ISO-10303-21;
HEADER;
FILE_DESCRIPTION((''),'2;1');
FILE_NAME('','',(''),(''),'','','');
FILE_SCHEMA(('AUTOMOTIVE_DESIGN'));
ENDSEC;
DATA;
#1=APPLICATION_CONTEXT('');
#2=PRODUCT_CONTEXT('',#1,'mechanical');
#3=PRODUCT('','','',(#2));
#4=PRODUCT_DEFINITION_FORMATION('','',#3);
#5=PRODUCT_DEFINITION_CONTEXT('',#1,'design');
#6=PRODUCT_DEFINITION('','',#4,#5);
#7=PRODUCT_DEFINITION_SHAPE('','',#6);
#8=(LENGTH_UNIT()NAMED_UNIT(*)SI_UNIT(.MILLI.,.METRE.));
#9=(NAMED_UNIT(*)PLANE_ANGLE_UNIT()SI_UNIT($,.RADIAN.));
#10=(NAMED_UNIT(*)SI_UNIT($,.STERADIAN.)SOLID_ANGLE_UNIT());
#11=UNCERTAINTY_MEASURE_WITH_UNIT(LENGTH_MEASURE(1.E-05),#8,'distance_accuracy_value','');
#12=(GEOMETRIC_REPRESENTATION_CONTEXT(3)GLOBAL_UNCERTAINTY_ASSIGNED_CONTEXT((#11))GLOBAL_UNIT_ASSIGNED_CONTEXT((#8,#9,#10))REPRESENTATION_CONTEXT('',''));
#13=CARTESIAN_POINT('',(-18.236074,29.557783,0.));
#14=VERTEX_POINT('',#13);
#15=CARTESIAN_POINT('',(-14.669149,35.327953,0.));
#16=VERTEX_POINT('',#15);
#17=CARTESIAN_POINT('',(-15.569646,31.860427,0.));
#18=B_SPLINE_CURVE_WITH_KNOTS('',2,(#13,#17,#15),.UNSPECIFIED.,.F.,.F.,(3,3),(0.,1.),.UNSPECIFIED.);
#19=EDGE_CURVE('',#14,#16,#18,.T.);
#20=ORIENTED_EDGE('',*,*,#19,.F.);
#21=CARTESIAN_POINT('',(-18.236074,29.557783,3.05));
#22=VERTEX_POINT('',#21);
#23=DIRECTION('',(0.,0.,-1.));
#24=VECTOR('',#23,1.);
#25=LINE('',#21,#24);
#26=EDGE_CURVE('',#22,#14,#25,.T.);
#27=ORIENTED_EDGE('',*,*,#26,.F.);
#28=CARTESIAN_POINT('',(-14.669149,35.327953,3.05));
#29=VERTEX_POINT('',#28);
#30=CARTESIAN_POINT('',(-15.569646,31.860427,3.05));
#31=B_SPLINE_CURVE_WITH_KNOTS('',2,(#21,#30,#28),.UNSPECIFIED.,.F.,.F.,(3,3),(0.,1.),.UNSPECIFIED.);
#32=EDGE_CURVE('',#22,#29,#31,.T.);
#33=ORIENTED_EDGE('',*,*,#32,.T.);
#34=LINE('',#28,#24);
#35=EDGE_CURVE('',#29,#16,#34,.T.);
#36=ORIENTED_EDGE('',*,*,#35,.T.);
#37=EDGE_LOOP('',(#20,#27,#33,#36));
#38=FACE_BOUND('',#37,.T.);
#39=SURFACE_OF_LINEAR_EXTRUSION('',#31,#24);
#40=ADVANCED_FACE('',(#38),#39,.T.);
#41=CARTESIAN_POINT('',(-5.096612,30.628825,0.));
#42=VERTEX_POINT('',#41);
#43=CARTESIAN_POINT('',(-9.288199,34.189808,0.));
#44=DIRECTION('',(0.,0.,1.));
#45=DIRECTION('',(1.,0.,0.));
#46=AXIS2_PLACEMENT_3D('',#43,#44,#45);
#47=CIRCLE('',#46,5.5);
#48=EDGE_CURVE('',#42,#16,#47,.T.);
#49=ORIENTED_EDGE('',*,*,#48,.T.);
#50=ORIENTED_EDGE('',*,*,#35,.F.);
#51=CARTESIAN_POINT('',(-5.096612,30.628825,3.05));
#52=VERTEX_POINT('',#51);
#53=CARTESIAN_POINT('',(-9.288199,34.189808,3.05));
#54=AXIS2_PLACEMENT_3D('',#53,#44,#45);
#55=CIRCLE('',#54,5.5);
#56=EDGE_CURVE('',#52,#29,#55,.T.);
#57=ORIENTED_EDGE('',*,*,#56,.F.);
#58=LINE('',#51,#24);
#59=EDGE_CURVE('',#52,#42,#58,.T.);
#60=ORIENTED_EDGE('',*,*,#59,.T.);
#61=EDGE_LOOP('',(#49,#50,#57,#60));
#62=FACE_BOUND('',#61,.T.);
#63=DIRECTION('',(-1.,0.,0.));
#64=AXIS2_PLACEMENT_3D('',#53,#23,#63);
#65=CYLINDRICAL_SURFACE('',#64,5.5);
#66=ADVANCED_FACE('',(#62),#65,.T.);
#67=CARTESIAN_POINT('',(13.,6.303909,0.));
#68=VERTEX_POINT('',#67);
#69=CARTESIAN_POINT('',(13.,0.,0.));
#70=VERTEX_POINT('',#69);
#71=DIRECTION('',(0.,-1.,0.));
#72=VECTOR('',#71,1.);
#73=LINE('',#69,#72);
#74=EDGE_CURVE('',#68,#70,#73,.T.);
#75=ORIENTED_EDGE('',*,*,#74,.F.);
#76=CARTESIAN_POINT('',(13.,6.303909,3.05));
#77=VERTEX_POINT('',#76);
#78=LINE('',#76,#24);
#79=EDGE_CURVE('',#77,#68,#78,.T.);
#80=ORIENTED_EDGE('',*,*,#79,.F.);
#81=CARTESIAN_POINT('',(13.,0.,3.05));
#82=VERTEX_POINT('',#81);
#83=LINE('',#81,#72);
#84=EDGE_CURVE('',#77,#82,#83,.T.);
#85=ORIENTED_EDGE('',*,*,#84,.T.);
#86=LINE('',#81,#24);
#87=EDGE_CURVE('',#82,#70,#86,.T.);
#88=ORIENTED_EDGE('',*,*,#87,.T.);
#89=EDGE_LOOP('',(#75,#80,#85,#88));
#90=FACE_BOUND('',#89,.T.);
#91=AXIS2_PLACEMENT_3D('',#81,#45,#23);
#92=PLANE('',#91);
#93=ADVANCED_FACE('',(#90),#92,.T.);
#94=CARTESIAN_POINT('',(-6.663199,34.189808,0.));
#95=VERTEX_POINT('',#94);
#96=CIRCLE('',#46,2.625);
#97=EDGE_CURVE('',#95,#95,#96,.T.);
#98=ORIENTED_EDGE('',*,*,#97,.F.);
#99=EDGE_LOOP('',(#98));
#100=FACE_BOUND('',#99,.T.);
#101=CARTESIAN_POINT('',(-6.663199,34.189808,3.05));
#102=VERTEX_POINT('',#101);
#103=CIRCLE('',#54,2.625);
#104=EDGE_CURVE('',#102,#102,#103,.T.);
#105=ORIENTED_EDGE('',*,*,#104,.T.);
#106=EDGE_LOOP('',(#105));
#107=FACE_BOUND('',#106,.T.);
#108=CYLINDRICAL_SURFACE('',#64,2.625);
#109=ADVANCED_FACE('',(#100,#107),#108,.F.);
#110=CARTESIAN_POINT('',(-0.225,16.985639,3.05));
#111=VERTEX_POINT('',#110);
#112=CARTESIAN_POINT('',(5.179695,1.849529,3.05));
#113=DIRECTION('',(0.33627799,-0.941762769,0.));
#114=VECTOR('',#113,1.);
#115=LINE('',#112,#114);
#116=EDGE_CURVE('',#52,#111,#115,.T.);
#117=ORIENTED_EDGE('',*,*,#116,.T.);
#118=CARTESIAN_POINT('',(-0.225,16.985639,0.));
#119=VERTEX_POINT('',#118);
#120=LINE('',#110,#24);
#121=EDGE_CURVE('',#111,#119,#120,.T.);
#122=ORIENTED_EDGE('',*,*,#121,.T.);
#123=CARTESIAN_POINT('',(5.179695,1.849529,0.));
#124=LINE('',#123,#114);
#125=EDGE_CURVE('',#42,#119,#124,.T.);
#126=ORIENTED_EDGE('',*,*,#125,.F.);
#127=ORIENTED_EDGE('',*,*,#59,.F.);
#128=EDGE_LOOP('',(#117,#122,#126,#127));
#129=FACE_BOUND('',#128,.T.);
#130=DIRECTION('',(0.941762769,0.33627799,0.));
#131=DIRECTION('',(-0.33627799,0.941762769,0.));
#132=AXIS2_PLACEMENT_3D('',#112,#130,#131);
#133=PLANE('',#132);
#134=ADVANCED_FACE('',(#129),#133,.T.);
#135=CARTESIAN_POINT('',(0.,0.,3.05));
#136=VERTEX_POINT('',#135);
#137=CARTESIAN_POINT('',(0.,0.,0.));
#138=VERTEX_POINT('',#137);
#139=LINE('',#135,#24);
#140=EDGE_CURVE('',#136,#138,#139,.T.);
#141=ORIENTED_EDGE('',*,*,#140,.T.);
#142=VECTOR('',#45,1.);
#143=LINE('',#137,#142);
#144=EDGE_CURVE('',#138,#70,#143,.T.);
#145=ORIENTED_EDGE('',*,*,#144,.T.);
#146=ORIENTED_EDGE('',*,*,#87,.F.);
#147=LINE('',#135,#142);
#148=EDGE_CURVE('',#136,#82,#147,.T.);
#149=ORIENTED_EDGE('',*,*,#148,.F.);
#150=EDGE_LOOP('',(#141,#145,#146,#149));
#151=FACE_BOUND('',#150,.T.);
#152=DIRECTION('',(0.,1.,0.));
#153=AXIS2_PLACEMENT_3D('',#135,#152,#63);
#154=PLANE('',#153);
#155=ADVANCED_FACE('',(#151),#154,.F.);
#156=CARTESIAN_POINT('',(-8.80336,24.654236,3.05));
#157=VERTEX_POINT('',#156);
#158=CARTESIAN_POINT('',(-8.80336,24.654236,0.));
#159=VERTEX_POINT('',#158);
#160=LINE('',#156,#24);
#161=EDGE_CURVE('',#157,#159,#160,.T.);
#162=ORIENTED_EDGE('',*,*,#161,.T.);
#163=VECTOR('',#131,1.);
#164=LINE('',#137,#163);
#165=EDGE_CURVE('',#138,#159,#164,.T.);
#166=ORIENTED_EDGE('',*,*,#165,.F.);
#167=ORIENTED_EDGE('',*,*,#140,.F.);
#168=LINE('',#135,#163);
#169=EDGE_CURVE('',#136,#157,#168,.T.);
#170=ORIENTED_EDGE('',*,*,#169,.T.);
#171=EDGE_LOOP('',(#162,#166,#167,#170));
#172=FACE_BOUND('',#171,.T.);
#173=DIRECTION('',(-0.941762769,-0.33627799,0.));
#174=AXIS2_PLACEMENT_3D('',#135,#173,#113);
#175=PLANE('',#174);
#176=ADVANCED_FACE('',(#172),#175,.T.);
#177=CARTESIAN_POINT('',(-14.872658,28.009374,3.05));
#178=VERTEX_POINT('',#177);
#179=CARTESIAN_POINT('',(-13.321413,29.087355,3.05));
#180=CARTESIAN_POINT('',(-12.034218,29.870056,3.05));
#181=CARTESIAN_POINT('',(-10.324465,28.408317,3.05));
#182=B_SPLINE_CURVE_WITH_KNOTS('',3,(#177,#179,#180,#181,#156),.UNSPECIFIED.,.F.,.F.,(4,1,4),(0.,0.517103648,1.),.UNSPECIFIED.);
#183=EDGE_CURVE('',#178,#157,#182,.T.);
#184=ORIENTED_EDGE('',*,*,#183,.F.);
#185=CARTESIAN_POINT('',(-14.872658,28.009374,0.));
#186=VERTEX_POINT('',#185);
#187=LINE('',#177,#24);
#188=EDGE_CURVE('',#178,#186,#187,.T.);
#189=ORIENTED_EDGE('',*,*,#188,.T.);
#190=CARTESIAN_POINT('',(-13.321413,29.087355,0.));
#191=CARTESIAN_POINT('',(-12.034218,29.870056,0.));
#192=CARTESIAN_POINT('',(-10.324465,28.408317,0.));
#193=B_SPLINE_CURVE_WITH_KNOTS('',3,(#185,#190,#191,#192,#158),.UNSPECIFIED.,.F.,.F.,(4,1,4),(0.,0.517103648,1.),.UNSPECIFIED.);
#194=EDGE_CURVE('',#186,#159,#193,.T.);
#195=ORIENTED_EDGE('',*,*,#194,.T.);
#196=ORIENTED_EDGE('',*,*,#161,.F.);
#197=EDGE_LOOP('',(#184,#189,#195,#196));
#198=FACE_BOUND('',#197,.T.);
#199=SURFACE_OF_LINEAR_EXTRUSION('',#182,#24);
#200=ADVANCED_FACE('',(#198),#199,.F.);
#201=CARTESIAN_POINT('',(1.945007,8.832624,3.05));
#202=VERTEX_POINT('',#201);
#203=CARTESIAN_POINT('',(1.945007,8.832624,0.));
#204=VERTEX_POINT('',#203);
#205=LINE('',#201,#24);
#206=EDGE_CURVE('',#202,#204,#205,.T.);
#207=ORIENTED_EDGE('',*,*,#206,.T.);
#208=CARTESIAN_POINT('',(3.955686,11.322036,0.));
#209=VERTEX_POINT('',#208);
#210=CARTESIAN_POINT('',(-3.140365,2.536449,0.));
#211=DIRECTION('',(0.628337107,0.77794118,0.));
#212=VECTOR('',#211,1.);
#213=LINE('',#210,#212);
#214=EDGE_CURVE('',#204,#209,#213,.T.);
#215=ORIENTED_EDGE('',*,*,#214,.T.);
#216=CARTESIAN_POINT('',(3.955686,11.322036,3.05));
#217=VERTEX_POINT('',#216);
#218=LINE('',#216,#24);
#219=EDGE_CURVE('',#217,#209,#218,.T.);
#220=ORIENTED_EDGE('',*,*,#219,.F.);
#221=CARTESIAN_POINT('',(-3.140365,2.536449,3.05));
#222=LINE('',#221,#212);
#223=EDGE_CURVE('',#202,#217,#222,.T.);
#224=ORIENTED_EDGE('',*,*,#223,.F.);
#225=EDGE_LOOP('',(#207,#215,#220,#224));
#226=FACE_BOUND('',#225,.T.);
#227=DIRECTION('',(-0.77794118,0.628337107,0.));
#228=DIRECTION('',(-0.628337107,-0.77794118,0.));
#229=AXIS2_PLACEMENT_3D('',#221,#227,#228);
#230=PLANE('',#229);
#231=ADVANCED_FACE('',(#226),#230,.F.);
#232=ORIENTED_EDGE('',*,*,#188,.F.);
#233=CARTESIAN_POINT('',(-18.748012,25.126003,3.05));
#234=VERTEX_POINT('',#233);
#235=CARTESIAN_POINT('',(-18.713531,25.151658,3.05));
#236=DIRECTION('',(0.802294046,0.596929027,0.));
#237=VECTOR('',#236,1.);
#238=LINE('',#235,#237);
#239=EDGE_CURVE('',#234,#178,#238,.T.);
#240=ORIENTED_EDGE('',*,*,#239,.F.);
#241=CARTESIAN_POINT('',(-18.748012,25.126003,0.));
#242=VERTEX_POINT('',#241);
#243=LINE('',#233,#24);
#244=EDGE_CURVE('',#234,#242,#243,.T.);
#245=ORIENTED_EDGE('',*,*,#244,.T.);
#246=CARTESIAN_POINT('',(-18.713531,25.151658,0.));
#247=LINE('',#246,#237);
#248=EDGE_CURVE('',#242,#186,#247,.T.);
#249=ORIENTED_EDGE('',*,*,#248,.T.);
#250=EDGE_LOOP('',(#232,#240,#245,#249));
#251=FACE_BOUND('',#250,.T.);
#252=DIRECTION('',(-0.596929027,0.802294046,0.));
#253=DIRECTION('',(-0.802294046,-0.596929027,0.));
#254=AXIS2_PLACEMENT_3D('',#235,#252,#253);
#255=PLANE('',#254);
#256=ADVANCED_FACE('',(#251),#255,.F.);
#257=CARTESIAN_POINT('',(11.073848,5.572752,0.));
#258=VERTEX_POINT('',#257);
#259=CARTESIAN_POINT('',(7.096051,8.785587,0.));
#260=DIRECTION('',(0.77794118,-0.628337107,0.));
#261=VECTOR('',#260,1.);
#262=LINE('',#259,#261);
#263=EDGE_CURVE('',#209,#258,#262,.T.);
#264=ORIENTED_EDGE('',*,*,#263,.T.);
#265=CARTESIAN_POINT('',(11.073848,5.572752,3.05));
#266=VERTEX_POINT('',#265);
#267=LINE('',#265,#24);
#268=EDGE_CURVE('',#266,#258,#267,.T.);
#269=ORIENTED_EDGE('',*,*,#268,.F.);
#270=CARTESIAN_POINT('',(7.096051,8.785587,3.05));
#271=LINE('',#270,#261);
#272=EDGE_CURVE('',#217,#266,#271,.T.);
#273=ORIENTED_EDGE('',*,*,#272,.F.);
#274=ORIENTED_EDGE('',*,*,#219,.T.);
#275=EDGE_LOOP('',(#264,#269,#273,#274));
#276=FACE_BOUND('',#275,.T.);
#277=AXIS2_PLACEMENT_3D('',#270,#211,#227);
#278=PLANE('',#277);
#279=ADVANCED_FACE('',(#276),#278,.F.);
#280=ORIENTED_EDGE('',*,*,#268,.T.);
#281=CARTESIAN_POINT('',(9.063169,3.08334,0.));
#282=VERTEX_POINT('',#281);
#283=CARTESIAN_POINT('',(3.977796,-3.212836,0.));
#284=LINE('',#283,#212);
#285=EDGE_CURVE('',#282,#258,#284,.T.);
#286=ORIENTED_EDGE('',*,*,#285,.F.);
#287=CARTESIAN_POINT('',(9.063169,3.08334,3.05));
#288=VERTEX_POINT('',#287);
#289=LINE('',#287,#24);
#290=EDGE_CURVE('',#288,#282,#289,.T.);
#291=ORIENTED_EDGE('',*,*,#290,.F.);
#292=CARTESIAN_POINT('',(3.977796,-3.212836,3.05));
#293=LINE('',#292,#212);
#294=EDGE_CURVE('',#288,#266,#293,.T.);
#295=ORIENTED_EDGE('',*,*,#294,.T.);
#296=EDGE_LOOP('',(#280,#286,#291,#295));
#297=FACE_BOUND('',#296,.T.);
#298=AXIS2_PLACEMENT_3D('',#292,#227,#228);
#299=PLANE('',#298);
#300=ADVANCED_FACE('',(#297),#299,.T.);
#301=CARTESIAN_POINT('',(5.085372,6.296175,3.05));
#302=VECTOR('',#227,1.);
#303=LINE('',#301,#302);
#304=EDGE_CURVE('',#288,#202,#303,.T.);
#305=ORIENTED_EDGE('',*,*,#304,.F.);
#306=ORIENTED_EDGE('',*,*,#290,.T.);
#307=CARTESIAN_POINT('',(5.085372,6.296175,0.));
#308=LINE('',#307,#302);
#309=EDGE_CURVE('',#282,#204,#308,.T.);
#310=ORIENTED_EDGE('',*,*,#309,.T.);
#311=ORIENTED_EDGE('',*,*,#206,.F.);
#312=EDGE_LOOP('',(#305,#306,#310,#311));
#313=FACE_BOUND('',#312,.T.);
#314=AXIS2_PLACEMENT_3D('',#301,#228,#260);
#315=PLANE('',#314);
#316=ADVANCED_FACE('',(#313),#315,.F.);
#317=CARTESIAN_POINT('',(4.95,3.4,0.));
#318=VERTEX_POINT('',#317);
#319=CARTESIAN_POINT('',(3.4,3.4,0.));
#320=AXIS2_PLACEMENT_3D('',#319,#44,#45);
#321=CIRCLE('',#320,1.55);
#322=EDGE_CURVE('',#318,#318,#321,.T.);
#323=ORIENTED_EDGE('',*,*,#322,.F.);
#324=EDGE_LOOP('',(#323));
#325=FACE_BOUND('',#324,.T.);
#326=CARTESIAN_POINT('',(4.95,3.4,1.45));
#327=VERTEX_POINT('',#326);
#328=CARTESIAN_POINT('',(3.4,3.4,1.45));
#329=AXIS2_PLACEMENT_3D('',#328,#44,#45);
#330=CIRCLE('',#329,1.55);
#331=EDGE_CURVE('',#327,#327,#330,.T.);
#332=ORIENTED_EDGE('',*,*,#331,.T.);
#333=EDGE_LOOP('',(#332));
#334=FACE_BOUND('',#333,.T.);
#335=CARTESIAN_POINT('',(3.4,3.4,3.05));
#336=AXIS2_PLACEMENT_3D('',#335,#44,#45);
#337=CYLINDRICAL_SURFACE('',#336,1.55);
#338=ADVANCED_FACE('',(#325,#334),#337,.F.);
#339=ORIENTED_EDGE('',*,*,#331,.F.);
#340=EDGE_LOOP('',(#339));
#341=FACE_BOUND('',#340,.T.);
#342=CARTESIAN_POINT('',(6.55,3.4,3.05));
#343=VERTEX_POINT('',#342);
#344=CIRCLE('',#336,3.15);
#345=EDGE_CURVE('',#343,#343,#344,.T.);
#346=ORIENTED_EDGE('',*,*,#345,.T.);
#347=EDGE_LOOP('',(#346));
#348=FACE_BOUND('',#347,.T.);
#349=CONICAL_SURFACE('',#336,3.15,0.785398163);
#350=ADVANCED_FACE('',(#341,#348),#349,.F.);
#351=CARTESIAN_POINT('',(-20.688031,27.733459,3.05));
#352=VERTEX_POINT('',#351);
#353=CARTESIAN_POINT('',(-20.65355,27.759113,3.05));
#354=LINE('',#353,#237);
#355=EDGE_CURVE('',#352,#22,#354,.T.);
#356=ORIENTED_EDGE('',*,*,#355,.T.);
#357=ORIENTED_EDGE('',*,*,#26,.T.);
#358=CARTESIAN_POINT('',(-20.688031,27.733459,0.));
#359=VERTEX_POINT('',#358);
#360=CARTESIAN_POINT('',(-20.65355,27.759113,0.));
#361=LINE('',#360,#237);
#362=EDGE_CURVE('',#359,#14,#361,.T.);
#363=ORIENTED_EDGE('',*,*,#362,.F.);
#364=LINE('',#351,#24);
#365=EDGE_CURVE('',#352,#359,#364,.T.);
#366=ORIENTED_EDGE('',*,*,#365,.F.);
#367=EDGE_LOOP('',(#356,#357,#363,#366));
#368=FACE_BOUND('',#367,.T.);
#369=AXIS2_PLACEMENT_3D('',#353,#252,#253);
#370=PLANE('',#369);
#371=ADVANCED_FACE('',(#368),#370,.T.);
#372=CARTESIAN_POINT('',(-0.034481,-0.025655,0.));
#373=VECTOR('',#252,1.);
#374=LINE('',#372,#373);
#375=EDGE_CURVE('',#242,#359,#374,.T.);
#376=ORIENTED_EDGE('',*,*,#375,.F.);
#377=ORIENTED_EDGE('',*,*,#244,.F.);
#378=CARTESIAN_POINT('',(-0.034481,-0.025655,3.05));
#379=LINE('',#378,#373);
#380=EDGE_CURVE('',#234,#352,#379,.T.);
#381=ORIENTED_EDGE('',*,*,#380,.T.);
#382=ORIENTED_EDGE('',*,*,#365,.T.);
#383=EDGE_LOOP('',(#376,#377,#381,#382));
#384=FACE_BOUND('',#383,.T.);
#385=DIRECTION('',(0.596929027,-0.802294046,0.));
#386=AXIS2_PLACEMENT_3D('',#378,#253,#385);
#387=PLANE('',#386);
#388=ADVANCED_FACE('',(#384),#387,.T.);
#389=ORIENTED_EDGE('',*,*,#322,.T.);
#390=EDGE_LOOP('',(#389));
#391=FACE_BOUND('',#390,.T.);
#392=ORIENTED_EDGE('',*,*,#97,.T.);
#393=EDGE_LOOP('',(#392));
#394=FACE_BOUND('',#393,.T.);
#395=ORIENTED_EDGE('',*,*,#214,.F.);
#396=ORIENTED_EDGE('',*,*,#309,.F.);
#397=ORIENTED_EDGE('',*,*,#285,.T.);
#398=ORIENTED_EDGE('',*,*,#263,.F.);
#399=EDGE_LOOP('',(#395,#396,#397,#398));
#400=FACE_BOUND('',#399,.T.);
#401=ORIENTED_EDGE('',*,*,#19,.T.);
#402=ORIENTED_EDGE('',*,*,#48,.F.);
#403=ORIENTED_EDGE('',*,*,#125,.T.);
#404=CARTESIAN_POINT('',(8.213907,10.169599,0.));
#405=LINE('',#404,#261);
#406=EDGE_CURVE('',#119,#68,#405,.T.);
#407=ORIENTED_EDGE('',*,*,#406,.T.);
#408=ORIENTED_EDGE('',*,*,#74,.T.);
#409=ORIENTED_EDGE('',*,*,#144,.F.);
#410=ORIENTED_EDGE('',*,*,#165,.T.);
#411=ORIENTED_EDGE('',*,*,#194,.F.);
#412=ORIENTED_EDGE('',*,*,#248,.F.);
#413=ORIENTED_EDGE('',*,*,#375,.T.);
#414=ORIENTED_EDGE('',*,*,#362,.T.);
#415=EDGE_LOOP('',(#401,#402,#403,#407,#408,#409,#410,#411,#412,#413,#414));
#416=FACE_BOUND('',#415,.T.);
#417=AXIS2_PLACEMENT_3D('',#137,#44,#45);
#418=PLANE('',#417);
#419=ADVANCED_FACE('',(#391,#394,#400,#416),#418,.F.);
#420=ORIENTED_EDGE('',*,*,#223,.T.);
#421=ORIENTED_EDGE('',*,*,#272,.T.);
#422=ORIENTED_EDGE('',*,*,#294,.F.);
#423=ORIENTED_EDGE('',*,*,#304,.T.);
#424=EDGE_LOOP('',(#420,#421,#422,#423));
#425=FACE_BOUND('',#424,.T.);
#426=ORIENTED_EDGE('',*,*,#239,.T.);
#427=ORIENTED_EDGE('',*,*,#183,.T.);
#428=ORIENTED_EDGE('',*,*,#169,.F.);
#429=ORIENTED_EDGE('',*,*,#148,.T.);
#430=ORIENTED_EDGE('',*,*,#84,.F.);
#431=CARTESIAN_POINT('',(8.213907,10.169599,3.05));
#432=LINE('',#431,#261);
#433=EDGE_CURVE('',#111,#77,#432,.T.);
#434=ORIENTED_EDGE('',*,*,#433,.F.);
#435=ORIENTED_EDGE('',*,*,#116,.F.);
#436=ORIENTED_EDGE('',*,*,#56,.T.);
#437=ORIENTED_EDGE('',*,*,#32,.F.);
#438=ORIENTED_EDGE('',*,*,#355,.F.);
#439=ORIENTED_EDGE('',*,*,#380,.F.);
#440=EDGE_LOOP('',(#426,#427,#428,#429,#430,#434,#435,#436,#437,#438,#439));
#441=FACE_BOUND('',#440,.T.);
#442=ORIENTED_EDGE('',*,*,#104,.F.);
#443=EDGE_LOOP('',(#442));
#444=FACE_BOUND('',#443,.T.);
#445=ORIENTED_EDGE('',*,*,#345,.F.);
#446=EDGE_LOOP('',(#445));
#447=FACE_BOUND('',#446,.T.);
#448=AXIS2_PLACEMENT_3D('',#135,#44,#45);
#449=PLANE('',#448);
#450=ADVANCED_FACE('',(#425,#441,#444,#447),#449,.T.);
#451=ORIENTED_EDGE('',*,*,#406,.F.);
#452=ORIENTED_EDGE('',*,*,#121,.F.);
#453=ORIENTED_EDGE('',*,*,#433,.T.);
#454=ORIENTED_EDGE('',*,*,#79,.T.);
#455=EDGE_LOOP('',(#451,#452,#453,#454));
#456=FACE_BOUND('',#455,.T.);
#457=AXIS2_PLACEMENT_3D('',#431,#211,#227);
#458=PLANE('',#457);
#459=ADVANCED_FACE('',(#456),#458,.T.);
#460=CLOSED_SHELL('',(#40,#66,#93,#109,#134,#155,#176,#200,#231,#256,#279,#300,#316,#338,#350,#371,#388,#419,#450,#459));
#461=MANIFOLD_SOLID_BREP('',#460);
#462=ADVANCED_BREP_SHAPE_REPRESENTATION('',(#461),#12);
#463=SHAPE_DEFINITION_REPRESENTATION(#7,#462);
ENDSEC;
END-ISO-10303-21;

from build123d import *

# Parameters (mm, degrees)
SKETCH1_R           = 1.5
SKETCH1_R_2         = 2.625
BOSS_EXTRUDE1_DEPTH = 3.05


with BuildPart() as part:
    # Sketch1 → Boss-Extrude1 (new body)
    with BuildSketch(Plane.XY):
        with BuildLine():
            Line((-8.803360363, 24.654236343), (0, 0))
            Line((0, 0), (13, 0))
            Line((13, 0), (13, 6.303908615))
            Line((13, 6.303908615), (-0.225000063, 16.985639436))
            Line((-0.225000063, 16.985639436), (-5.096612315, 30.628825091))
            ThreePointArc((-5.096612315, 30.628825091), (-6.864545193, 39.127004069), (-14.669149283, 35.327953187))
            add(Edge.make_bspline(
                [(-18.236074249, 29.557782775), (-15.56964568, 31.860427367), (-14.669149283, 35.327953187)],
                knots=[0, 0, 0, 1, 1, 1], degree=2))
            Line((-18.236074249, 29.557782775), (-20.68803125, 27.733458745))
            Line((-20.68803125, 27.733458745), (-18.748011912, 25.126003095))
            Line((-18.748011912, 25.126003095), (-14.872658256, 28.009373723))
            add(Edge.make_bspline(
                [(-14.872658256, 28.009373723), (-13.321413482, 29.087354752), (-12.034218378, 29.87005609), (-10.324464656, 28.408317489), (-8.803360363, 24.654236343)],
                knots=[0, 0, 0, 0, 0.517103648, 1, 1, 1, 1], degree=3))
        make_face()
        with Locations((3.4, 3.4)):
            Circle(SKETCH1_R, mode=Mode.SUBTRACT)
        Polygon((11.073847559, 5.572751724), (9.110294099, 3.141685535), (9.063168816, 3.083339947), (1.945007017, 8.832624477), (3.95568576, 11.322036253), align=None, mode=Mode.SUBTRACT)
        with Locations((-9.28819898, 34.189808273)):
            Circle(SKETCH1_R_2, mode=Mode.SUBTRACT)
    extrude(amount=BOSS_EXTRUDE1_DEPTH)

    # Sketch3 → CSK for M3 Flat Head Machine Screw1 (revolve, cut)
    with BuildSketch(Plane(origin=(3.4, 3.4, 3.05), x_dir=(0, -1, 0), z_dir=(1, 0, 0))):
        Polygon((0, 0), (0, 3.05), (1.55, 3.05), (1.55, 1.6), (3.15, 0), align=None)
    revolve(axis=Axis((3.4, 3.4, 9.4), (0, 0, -1)), mode=Mode.SUBTRACT)


solid = part.part
